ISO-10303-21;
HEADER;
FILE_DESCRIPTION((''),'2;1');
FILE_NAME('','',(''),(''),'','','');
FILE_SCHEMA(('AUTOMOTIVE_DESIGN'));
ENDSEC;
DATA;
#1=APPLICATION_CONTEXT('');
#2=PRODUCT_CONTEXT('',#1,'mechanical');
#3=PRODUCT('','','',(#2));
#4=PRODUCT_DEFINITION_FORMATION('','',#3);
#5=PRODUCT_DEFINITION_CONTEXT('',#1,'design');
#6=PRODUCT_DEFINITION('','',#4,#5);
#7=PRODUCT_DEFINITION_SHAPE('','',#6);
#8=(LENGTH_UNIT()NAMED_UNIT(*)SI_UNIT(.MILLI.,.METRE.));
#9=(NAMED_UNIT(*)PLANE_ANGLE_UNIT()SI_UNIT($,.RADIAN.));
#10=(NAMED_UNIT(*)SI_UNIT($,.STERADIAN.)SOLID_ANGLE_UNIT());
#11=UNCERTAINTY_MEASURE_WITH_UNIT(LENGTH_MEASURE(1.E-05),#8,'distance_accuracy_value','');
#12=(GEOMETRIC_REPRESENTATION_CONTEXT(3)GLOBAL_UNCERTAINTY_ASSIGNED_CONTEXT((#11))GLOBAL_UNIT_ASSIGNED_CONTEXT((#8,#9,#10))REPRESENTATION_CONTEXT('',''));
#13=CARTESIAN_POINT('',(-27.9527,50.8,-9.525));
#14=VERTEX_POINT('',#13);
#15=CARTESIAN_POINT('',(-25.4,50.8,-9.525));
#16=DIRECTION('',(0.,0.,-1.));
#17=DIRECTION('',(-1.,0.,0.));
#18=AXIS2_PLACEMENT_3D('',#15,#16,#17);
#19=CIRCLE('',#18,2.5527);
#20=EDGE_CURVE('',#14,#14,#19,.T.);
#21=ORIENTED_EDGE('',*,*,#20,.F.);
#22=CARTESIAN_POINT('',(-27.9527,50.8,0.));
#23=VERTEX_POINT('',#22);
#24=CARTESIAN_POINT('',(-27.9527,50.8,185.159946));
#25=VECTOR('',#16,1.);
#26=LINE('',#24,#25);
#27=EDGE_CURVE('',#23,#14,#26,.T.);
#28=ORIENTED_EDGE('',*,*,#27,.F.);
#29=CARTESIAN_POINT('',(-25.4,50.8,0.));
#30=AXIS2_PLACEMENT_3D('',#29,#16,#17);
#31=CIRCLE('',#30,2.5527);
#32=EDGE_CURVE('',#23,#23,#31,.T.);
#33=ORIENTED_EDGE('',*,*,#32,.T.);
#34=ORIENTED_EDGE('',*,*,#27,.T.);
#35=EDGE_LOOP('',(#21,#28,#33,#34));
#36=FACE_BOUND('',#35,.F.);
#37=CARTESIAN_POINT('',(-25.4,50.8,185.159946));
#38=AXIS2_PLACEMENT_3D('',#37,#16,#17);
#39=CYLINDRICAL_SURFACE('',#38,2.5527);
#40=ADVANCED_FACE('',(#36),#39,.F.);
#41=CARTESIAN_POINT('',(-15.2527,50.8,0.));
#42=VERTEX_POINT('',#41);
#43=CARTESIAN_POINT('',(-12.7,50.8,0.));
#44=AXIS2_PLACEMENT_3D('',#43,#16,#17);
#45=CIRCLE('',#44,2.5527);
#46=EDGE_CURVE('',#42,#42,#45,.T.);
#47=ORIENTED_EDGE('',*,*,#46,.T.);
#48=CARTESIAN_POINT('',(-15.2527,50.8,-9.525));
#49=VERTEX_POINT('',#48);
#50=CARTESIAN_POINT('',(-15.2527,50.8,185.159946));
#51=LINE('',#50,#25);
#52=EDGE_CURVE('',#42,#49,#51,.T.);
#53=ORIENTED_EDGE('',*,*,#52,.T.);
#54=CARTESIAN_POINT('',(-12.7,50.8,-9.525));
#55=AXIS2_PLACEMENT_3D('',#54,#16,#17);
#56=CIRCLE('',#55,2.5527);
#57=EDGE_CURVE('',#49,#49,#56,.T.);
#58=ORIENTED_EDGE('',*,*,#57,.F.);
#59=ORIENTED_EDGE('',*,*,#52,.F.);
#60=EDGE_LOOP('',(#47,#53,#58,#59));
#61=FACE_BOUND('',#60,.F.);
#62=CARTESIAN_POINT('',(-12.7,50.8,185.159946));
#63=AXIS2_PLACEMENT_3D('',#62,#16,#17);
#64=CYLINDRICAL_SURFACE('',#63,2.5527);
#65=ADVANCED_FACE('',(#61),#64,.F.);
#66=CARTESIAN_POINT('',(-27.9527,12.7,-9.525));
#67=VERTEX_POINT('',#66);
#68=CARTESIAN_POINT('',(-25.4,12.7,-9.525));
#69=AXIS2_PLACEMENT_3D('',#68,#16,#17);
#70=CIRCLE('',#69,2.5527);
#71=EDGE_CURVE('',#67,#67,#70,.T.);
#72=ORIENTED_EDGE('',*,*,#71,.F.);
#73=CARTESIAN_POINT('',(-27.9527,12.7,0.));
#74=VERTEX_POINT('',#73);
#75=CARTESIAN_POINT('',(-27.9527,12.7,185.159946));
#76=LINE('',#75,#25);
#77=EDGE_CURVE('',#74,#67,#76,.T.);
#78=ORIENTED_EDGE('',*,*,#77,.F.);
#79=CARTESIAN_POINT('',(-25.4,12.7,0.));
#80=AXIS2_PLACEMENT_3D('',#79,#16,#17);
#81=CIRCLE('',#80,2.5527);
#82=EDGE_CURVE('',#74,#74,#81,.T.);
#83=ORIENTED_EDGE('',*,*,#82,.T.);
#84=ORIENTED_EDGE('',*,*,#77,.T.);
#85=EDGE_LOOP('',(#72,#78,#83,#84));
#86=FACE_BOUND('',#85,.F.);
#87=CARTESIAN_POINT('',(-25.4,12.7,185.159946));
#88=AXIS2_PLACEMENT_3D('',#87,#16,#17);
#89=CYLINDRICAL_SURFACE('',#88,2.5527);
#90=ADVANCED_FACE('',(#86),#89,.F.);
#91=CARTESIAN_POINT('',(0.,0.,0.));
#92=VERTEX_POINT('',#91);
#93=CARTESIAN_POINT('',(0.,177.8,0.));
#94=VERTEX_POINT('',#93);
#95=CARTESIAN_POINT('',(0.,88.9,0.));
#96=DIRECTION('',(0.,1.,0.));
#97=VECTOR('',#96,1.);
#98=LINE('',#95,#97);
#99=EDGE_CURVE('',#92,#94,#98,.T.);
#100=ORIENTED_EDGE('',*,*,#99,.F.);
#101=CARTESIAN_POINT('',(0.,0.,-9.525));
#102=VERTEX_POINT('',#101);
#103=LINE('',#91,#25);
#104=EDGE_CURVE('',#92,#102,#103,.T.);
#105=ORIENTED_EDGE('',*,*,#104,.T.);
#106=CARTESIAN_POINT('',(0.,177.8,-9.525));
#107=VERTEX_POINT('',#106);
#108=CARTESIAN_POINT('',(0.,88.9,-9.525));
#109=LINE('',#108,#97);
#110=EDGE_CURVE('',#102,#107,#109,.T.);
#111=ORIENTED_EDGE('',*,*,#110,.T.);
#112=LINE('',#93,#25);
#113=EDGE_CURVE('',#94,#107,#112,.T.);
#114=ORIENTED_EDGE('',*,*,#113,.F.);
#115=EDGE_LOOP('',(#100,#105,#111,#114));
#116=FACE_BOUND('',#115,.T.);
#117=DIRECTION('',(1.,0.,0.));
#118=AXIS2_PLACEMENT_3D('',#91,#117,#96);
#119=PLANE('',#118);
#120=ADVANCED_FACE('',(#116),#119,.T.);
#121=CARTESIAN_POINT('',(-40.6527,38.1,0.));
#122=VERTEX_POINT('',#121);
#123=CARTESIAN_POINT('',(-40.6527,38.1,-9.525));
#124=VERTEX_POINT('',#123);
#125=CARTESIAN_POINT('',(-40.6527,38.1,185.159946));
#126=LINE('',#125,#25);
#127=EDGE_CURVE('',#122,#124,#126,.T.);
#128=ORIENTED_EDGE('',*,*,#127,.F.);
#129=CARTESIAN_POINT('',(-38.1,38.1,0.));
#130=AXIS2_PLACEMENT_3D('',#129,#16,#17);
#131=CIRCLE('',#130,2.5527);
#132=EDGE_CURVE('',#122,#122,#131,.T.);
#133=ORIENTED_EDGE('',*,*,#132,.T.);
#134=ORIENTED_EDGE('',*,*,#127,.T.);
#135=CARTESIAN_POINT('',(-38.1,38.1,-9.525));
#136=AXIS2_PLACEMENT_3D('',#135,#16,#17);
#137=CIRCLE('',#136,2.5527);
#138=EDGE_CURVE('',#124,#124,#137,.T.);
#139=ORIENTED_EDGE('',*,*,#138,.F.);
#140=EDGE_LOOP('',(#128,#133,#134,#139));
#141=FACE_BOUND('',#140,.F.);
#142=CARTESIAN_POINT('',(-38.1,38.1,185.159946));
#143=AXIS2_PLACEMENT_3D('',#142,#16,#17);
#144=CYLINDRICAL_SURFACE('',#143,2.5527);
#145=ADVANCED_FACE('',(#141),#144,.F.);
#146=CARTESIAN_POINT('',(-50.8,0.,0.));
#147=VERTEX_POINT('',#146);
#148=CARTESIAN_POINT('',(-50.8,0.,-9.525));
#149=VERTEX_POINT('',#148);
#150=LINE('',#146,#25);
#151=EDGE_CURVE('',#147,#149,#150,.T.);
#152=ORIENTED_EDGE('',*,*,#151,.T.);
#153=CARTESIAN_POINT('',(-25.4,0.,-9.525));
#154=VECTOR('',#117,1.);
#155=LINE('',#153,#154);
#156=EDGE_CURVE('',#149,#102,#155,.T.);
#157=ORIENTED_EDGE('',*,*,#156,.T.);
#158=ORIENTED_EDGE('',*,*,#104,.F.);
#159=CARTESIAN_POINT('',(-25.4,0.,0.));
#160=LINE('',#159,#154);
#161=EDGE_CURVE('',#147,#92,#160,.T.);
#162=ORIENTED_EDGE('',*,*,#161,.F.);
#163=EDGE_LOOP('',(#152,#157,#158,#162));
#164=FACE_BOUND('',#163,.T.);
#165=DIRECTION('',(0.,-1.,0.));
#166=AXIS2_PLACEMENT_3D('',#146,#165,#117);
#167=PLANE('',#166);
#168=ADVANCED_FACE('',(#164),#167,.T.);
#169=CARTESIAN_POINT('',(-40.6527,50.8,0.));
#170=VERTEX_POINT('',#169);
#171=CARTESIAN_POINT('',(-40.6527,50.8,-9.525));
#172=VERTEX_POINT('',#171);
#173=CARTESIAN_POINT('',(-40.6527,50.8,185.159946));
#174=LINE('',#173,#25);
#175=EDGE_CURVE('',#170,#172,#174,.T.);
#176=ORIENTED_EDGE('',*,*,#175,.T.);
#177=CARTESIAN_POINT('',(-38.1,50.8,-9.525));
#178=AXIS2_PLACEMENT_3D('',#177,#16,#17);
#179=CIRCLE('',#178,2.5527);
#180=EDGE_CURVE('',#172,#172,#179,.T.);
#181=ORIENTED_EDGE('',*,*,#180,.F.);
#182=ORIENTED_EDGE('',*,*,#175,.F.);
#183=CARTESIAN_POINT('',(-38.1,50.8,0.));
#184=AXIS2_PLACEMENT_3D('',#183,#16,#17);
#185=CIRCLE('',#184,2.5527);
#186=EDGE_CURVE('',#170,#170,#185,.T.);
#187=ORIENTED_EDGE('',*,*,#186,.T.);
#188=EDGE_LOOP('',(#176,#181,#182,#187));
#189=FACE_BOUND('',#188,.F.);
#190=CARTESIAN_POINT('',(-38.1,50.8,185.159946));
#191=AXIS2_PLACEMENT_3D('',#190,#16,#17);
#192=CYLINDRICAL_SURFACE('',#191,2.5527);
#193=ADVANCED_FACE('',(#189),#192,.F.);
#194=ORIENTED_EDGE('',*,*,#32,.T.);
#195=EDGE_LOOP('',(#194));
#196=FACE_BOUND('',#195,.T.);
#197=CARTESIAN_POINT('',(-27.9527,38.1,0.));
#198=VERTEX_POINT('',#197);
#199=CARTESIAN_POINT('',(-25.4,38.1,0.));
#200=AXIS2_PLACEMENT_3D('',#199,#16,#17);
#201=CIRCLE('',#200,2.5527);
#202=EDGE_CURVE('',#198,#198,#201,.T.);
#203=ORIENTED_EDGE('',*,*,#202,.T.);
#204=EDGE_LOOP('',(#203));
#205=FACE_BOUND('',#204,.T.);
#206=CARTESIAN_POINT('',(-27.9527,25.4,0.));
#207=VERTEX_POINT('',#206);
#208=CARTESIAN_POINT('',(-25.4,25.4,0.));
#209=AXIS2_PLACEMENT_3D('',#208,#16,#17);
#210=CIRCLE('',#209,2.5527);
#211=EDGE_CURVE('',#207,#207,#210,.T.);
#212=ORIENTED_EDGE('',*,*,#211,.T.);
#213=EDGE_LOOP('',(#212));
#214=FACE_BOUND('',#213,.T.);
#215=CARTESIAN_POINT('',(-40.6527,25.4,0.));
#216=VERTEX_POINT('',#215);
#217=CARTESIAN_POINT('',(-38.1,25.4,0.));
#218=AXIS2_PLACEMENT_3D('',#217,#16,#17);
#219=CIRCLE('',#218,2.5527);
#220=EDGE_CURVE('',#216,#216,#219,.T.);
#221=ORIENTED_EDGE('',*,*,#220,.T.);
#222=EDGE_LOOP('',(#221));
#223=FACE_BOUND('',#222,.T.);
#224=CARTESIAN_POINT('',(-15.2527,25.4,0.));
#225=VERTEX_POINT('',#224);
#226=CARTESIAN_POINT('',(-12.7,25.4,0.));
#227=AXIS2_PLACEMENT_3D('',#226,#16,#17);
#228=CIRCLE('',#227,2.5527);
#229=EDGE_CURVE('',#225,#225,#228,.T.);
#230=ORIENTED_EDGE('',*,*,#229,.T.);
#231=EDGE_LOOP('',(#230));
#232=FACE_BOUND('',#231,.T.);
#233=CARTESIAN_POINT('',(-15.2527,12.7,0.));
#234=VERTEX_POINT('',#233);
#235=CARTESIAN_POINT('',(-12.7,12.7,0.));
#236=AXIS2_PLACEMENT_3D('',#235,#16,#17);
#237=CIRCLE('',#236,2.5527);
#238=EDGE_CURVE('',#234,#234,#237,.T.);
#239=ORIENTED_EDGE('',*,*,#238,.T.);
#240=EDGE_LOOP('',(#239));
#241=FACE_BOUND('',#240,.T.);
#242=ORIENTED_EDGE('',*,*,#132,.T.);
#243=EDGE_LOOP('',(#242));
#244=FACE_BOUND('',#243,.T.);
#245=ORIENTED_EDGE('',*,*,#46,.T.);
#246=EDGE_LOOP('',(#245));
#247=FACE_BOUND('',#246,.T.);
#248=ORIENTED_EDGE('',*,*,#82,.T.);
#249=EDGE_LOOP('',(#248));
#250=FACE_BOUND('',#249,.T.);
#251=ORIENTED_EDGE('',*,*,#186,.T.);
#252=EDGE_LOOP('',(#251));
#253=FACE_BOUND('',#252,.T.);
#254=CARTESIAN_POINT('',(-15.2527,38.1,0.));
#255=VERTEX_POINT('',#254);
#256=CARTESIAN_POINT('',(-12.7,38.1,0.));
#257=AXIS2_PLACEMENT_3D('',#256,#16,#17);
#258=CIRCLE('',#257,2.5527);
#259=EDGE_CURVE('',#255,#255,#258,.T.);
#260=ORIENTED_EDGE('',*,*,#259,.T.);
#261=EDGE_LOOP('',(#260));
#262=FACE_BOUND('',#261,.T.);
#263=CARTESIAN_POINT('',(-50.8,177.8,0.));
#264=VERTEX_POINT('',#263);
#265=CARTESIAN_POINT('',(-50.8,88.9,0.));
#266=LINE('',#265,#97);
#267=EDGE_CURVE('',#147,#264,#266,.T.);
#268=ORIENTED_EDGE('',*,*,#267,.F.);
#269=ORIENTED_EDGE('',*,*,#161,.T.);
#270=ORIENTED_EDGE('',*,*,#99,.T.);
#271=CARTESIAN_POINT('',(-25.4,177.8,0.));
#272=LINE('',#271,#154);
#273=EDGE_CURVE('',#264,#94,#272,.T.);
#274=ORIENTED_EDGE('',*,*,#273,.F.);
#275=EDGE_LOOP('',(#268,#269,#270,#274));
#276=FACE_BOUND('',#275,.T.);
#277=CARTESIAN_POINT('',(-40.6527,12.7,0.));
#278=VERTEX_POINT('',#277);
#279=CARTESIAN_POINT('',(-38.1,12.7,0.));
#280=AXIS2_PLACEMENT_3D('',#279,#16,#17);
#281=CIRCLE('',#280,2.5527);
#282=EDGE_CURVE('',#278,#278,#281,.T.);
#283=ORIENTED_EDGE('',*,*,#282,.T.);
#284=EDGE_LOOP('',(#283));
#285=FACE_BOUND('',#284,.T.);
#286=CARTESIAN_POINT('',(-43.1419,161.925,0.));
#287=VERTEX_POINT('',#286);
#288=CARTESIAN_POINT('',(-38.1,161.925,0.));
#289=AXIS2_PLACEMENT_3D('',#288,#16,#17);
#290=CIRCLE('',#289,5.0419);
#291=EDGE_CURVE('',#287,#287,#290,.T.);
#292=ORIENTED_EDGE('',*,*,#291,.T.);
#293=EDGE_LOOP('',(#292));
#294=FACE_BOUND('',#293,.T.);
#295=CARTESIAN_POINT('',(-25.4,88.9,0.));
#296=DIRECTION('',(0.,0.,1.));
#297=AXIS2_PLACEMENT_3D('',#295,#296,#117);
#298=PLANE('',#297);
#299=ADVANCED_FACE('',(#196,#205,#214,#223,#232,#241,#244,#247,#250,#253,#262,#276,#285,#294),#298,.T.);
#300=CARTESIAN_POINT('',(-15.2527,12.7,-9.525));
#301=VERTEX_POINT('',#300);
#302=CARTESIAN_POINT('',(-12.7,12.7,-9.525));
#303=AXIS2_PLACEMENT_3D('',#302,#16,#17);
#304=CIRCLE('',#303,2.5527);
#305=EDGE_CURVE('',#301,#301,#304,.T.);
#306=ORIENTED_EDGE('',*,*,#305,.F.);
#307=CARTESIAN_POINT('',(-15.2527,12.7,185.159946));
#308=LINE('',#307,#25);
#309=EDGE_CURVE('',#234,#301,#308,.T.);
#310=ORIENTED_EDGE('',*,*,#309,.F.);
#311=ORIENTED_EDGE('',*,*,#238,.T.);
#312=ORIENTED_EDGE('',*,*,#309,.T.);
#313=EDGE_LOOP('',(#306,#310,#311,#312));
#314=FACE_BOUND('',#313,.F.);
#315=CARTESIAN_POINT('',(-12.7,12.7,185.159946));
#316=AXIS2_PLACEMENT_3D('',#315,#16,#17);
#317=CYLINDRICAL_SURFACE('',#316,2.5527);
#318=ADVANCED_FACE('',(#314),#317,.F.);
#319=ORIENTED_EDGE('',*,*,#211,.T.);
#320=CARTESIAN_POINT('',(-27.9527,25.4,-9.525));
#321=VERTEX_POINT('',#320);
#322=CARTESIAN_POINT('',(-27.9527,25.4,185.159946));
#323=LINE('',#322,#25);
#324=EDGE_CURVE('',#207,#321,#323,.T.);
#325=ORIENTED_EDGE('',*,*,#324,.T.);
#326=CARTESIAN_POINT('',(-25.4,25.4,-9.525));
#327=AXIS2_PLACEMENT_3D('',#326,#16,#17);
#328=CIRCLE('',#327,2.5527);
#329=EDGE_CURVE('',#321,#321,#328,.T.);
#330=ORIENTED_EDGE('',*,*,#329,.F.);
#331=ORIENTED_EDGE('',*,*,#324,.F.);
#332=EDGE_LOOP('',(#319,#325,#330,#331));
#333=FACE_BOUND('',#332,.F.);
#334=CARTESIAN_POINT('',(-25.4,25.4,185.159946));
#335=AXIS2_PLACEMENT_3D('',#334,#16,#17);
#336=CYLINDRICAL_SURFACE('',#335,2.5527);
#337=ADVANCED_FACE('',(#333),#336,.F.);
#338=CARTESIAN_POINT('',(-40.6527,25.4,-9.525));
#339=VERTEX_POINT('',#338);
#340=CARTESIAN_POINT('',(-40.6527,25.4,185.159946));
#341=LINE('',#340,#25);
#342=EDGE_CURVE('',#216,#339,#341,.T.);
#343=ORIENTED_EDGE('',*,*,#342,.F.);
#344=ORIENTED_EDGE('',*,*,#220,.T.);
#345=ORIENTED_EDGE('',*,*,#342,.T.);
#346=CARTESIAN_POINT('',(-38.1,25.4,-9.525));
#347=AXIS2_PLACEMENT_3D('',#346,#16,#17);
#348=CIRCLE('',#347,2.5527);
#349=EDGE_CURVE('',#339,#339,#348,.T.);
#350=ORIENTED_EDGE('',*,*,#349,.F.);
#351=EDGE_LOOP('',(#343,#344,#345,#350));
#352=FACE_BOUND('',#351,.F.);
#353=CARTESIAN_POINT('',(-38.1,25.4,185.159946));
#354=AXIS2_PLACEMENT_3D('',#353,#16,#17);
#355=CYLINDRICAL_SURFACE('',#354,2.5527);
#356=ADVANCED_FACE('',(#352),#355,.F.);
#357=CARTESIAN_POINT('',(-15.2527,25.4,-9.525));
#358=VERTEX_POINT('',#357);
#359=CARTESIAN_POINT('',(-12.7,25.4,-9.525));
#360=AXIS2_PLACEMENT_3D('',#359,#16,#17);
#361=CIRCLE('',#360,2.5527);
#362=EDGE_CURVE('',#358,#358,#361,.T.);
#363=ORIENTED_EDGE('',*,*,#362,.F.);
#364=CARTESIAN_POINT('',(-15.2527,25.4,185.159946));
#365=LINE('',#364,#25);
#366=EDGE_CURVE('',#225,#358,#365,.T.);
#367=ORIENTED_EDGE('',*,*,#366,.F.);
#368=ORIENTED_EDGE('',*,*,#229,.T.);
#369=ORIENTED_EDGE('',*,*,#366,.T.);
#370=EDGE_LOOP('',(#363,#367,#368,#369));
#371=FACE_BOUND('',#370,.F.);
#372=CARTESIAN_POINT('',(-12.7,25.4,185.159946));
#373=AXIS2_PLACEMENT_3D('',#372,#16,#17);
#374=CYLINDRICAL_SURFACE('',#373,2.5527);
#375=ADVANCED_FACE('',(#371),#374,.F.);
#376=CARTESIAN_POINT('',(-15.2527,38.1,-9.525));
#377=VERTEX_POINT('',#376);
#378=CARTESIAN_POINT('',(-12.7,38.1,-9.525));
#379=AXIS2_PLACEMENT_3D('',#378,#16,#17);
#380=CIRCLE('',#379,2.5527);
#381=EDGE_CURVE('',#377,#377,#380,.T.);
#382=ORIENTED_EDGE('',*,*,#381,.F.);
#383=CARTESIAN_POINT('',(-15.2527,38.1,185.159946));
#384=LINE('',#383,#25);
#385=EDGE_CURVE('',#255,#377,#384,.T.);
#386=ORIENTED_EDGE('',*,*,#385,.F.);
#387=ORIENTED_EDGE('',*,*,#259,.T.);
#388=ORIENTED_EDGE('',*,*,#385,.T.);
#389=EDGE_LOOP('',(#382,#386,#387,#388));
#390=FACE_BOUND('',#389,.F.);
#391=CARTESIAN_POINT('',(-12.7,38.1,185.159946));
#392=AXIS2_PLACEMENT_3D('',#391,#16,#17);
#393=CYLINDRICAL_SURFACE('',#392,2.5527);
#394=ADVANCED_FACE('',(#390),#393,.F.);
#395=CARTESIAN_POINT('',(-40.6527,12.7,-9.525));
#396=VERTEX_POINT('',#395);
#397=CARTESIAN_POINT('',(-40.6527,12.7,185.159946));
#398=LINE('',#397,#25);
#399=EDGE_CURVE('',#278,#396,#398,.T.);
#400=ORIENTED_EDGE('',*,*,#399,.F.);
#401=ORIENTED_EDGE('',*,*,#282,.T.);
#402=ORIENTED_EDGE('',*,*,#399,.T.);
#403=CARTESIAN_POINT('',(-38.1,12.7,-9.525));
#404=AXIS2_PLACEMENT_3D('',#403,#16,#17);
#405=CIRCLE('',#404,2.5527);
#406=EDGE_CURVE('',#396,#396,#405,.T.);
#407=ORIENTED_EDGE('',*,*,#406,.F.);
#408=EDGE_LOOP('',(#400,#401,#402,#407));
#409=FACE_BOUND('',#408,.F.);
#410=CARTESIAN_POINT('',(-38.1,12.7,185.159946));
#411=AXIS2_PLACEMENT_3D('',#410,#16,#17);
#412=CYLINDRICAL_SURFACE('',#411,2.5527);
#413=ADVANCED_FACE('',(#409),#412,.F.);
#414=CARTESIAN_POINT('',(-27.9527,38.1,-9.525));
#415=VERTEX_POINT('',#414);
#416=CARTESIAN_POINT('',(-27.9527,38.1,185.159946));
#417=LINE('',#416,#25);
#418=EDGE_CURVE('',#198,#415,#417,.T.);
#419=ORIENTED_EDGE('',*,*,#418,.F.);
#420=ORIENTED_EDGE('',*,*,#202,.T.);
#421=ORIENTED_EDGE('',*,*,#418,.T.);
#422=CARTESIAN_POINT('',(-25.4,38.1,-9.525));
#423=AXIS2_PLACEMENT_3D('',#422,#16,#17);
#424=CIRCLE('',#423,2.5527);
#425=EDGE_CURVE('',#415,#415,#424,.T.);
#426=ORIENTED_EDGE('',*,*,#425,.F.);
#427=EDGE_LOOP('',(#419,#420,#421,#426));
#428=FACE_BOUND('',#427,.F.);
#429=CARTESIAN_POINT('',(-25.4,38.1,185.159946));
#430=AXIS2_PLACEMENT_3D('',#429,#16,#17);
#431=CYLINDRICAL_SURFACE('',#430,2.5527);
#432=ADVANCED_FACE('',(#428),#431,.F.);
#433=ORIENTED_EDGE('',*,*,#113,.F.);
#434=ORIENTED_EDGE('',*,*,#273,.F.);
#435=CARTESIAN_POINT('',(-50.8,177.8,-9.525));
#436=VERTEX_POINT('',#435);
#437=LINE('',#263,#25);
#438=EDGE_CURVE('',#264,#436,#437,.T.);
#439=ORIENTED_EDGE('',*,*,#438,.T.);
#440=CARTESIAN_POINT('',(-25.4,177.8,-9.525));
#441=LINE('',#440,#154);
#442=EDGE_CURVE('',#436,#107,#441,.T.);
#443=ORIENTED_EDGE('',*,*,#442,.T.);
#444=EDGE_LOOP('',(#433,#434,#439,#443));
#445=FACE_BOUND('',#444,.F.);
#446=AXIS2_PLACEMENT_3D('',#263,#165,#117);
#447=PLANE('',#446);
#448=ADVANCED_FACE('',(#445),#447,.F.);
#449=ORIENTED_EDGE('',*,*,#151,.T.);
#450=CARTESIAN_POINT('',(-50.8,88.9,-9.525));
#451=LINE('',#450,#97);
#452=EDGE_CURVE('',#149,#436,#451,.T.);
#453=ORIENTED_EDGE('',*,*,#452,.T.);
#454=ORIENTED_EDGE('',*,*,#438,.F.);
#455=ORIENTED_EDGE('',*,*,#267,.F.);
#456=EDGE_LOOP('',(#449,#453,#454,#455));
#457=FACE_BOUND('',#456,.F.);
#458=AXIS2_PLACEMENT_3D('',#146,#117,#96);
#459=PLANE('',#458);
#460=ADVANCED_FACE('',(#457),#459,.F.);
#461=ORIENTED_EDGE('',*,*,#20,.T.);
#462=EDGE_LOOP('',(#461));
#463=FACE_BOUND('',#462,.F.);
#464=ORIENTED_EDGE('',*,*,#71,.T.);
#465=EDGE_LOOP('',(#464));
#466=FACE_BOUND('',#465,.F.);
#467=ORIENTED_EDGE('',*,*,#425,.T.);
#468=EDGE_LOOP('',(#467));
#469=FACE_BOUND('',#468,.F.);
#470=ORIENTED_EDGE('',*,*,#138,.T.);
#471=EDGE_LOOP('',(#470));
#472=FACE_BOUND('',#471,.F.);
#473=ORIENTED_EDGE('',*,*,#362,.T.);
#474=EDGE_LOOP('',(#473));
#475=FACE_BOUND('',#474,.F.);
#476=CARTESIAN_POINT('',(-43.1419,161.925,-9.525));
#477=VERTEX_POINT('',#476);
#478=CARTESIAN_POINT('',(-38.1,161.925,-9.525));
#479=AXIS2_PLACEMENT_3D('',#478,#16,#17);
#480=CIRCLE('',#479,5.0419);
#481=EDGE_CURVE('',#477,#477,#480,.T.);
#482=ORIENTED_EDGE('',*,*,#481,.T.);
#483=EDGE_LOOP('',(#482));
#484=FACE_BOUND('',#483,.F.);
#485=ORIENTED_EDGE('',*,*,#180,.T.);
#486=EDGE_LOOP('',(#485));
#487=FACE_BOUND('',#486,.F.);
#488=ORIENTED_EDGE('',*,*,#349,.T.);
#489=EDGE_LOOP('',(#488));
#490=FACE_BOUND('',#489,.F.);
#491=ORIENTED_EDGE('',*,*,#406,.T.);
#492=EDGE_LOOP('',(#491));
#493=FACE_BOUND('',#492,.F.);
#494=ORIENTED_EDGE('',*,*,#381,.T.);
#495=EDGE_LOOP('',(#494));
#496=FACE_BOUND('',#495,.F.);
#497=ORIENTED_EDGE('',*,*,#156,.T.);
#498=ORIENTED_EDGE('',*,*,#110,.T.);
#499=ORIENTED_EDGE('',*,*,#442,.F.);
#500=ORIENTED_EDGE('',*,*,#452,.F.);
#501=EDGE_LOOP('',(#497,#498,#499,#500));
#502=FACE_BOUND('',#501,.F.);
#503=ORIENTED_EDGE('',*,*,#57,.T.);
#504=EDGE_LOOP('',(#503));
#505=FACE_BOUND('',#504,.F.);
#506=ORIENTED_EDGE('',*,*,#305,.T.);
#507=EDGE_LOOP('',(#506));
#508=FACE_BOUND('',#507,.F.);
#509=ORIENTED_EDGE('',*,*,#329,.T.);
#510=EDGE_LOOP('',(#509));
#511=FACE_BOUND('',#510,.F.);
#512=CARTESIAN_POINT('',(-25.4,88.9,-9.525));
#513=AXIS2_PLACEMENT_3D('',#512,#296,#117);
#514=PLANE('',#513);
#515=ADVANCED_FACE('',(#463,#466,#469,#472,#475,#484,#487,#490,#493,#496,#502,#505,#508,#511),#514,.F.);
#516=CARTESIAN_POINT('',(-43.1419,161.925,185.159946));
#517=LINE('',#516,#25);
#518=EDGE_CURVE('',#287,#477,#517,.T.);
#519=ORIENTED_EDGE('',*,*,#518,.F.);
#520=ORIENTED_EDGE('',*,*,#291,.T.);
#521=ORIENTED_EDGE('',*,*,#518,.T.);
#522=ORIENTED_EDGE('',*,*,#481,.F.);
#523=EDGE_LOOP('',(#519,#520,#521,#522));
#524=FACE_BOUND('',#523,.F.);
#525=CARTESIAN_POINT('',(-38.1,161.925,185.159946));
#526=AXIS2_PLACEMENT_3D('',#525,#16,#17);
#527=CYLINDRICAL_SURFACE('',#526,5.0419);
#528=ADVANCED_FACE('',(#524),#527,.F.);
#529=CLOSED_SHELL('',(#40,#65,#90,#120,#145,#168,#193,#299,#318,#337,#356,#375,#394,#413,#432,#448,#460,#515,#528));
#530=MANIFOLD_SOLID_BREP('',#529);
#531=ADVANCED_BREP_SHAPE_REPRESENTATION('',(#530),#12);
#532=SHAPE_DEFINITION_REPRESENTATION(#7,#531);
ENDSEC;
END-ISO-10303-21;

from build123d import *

# Parameters (mm, degrees)
F0_W     = 50.8
F0_H     = 177.8
F1_DEPTH = 9.525
F2_D     = 5.1054
F3_D     = 10.0838


# Not quite as in the source:
# - a length typed as a fraction of an inch, garbled in the dataset ("3 / 203.2 mm" for 3/8 in), is restored


with BuildPart() as f1:
    # F0 (on Top) → F1 (new body)
    with BuildSketch(Plane.XY):
        with Locations((-25.4, 88.9)):
            Rectangle(F0_W, F0_H)
    extrude(amount=-F1_DEPTH)

    # F2 (through all)
    with Locations(Plane.XY):
        with Locations((-12.7, 12.7), (-25.4, 12.7), (-38.1, 12.7), (-38.1, 25.4), (-25.4, 25.4), (-12.7, 25.4), (-12.7, 38.1), (-25.4, 38.1), (-38.1, 38.1), (-38.1, 50.8), (-25.4, 50.8), (-12.7, 50.8)):
            Hole(F2_D / 2)

    # F3 (through all)
    with Locations(Plane.XY):
        with Locations((-38.1, 161.925)):
            Hole(F3_D / 2)


solid = f1.part
